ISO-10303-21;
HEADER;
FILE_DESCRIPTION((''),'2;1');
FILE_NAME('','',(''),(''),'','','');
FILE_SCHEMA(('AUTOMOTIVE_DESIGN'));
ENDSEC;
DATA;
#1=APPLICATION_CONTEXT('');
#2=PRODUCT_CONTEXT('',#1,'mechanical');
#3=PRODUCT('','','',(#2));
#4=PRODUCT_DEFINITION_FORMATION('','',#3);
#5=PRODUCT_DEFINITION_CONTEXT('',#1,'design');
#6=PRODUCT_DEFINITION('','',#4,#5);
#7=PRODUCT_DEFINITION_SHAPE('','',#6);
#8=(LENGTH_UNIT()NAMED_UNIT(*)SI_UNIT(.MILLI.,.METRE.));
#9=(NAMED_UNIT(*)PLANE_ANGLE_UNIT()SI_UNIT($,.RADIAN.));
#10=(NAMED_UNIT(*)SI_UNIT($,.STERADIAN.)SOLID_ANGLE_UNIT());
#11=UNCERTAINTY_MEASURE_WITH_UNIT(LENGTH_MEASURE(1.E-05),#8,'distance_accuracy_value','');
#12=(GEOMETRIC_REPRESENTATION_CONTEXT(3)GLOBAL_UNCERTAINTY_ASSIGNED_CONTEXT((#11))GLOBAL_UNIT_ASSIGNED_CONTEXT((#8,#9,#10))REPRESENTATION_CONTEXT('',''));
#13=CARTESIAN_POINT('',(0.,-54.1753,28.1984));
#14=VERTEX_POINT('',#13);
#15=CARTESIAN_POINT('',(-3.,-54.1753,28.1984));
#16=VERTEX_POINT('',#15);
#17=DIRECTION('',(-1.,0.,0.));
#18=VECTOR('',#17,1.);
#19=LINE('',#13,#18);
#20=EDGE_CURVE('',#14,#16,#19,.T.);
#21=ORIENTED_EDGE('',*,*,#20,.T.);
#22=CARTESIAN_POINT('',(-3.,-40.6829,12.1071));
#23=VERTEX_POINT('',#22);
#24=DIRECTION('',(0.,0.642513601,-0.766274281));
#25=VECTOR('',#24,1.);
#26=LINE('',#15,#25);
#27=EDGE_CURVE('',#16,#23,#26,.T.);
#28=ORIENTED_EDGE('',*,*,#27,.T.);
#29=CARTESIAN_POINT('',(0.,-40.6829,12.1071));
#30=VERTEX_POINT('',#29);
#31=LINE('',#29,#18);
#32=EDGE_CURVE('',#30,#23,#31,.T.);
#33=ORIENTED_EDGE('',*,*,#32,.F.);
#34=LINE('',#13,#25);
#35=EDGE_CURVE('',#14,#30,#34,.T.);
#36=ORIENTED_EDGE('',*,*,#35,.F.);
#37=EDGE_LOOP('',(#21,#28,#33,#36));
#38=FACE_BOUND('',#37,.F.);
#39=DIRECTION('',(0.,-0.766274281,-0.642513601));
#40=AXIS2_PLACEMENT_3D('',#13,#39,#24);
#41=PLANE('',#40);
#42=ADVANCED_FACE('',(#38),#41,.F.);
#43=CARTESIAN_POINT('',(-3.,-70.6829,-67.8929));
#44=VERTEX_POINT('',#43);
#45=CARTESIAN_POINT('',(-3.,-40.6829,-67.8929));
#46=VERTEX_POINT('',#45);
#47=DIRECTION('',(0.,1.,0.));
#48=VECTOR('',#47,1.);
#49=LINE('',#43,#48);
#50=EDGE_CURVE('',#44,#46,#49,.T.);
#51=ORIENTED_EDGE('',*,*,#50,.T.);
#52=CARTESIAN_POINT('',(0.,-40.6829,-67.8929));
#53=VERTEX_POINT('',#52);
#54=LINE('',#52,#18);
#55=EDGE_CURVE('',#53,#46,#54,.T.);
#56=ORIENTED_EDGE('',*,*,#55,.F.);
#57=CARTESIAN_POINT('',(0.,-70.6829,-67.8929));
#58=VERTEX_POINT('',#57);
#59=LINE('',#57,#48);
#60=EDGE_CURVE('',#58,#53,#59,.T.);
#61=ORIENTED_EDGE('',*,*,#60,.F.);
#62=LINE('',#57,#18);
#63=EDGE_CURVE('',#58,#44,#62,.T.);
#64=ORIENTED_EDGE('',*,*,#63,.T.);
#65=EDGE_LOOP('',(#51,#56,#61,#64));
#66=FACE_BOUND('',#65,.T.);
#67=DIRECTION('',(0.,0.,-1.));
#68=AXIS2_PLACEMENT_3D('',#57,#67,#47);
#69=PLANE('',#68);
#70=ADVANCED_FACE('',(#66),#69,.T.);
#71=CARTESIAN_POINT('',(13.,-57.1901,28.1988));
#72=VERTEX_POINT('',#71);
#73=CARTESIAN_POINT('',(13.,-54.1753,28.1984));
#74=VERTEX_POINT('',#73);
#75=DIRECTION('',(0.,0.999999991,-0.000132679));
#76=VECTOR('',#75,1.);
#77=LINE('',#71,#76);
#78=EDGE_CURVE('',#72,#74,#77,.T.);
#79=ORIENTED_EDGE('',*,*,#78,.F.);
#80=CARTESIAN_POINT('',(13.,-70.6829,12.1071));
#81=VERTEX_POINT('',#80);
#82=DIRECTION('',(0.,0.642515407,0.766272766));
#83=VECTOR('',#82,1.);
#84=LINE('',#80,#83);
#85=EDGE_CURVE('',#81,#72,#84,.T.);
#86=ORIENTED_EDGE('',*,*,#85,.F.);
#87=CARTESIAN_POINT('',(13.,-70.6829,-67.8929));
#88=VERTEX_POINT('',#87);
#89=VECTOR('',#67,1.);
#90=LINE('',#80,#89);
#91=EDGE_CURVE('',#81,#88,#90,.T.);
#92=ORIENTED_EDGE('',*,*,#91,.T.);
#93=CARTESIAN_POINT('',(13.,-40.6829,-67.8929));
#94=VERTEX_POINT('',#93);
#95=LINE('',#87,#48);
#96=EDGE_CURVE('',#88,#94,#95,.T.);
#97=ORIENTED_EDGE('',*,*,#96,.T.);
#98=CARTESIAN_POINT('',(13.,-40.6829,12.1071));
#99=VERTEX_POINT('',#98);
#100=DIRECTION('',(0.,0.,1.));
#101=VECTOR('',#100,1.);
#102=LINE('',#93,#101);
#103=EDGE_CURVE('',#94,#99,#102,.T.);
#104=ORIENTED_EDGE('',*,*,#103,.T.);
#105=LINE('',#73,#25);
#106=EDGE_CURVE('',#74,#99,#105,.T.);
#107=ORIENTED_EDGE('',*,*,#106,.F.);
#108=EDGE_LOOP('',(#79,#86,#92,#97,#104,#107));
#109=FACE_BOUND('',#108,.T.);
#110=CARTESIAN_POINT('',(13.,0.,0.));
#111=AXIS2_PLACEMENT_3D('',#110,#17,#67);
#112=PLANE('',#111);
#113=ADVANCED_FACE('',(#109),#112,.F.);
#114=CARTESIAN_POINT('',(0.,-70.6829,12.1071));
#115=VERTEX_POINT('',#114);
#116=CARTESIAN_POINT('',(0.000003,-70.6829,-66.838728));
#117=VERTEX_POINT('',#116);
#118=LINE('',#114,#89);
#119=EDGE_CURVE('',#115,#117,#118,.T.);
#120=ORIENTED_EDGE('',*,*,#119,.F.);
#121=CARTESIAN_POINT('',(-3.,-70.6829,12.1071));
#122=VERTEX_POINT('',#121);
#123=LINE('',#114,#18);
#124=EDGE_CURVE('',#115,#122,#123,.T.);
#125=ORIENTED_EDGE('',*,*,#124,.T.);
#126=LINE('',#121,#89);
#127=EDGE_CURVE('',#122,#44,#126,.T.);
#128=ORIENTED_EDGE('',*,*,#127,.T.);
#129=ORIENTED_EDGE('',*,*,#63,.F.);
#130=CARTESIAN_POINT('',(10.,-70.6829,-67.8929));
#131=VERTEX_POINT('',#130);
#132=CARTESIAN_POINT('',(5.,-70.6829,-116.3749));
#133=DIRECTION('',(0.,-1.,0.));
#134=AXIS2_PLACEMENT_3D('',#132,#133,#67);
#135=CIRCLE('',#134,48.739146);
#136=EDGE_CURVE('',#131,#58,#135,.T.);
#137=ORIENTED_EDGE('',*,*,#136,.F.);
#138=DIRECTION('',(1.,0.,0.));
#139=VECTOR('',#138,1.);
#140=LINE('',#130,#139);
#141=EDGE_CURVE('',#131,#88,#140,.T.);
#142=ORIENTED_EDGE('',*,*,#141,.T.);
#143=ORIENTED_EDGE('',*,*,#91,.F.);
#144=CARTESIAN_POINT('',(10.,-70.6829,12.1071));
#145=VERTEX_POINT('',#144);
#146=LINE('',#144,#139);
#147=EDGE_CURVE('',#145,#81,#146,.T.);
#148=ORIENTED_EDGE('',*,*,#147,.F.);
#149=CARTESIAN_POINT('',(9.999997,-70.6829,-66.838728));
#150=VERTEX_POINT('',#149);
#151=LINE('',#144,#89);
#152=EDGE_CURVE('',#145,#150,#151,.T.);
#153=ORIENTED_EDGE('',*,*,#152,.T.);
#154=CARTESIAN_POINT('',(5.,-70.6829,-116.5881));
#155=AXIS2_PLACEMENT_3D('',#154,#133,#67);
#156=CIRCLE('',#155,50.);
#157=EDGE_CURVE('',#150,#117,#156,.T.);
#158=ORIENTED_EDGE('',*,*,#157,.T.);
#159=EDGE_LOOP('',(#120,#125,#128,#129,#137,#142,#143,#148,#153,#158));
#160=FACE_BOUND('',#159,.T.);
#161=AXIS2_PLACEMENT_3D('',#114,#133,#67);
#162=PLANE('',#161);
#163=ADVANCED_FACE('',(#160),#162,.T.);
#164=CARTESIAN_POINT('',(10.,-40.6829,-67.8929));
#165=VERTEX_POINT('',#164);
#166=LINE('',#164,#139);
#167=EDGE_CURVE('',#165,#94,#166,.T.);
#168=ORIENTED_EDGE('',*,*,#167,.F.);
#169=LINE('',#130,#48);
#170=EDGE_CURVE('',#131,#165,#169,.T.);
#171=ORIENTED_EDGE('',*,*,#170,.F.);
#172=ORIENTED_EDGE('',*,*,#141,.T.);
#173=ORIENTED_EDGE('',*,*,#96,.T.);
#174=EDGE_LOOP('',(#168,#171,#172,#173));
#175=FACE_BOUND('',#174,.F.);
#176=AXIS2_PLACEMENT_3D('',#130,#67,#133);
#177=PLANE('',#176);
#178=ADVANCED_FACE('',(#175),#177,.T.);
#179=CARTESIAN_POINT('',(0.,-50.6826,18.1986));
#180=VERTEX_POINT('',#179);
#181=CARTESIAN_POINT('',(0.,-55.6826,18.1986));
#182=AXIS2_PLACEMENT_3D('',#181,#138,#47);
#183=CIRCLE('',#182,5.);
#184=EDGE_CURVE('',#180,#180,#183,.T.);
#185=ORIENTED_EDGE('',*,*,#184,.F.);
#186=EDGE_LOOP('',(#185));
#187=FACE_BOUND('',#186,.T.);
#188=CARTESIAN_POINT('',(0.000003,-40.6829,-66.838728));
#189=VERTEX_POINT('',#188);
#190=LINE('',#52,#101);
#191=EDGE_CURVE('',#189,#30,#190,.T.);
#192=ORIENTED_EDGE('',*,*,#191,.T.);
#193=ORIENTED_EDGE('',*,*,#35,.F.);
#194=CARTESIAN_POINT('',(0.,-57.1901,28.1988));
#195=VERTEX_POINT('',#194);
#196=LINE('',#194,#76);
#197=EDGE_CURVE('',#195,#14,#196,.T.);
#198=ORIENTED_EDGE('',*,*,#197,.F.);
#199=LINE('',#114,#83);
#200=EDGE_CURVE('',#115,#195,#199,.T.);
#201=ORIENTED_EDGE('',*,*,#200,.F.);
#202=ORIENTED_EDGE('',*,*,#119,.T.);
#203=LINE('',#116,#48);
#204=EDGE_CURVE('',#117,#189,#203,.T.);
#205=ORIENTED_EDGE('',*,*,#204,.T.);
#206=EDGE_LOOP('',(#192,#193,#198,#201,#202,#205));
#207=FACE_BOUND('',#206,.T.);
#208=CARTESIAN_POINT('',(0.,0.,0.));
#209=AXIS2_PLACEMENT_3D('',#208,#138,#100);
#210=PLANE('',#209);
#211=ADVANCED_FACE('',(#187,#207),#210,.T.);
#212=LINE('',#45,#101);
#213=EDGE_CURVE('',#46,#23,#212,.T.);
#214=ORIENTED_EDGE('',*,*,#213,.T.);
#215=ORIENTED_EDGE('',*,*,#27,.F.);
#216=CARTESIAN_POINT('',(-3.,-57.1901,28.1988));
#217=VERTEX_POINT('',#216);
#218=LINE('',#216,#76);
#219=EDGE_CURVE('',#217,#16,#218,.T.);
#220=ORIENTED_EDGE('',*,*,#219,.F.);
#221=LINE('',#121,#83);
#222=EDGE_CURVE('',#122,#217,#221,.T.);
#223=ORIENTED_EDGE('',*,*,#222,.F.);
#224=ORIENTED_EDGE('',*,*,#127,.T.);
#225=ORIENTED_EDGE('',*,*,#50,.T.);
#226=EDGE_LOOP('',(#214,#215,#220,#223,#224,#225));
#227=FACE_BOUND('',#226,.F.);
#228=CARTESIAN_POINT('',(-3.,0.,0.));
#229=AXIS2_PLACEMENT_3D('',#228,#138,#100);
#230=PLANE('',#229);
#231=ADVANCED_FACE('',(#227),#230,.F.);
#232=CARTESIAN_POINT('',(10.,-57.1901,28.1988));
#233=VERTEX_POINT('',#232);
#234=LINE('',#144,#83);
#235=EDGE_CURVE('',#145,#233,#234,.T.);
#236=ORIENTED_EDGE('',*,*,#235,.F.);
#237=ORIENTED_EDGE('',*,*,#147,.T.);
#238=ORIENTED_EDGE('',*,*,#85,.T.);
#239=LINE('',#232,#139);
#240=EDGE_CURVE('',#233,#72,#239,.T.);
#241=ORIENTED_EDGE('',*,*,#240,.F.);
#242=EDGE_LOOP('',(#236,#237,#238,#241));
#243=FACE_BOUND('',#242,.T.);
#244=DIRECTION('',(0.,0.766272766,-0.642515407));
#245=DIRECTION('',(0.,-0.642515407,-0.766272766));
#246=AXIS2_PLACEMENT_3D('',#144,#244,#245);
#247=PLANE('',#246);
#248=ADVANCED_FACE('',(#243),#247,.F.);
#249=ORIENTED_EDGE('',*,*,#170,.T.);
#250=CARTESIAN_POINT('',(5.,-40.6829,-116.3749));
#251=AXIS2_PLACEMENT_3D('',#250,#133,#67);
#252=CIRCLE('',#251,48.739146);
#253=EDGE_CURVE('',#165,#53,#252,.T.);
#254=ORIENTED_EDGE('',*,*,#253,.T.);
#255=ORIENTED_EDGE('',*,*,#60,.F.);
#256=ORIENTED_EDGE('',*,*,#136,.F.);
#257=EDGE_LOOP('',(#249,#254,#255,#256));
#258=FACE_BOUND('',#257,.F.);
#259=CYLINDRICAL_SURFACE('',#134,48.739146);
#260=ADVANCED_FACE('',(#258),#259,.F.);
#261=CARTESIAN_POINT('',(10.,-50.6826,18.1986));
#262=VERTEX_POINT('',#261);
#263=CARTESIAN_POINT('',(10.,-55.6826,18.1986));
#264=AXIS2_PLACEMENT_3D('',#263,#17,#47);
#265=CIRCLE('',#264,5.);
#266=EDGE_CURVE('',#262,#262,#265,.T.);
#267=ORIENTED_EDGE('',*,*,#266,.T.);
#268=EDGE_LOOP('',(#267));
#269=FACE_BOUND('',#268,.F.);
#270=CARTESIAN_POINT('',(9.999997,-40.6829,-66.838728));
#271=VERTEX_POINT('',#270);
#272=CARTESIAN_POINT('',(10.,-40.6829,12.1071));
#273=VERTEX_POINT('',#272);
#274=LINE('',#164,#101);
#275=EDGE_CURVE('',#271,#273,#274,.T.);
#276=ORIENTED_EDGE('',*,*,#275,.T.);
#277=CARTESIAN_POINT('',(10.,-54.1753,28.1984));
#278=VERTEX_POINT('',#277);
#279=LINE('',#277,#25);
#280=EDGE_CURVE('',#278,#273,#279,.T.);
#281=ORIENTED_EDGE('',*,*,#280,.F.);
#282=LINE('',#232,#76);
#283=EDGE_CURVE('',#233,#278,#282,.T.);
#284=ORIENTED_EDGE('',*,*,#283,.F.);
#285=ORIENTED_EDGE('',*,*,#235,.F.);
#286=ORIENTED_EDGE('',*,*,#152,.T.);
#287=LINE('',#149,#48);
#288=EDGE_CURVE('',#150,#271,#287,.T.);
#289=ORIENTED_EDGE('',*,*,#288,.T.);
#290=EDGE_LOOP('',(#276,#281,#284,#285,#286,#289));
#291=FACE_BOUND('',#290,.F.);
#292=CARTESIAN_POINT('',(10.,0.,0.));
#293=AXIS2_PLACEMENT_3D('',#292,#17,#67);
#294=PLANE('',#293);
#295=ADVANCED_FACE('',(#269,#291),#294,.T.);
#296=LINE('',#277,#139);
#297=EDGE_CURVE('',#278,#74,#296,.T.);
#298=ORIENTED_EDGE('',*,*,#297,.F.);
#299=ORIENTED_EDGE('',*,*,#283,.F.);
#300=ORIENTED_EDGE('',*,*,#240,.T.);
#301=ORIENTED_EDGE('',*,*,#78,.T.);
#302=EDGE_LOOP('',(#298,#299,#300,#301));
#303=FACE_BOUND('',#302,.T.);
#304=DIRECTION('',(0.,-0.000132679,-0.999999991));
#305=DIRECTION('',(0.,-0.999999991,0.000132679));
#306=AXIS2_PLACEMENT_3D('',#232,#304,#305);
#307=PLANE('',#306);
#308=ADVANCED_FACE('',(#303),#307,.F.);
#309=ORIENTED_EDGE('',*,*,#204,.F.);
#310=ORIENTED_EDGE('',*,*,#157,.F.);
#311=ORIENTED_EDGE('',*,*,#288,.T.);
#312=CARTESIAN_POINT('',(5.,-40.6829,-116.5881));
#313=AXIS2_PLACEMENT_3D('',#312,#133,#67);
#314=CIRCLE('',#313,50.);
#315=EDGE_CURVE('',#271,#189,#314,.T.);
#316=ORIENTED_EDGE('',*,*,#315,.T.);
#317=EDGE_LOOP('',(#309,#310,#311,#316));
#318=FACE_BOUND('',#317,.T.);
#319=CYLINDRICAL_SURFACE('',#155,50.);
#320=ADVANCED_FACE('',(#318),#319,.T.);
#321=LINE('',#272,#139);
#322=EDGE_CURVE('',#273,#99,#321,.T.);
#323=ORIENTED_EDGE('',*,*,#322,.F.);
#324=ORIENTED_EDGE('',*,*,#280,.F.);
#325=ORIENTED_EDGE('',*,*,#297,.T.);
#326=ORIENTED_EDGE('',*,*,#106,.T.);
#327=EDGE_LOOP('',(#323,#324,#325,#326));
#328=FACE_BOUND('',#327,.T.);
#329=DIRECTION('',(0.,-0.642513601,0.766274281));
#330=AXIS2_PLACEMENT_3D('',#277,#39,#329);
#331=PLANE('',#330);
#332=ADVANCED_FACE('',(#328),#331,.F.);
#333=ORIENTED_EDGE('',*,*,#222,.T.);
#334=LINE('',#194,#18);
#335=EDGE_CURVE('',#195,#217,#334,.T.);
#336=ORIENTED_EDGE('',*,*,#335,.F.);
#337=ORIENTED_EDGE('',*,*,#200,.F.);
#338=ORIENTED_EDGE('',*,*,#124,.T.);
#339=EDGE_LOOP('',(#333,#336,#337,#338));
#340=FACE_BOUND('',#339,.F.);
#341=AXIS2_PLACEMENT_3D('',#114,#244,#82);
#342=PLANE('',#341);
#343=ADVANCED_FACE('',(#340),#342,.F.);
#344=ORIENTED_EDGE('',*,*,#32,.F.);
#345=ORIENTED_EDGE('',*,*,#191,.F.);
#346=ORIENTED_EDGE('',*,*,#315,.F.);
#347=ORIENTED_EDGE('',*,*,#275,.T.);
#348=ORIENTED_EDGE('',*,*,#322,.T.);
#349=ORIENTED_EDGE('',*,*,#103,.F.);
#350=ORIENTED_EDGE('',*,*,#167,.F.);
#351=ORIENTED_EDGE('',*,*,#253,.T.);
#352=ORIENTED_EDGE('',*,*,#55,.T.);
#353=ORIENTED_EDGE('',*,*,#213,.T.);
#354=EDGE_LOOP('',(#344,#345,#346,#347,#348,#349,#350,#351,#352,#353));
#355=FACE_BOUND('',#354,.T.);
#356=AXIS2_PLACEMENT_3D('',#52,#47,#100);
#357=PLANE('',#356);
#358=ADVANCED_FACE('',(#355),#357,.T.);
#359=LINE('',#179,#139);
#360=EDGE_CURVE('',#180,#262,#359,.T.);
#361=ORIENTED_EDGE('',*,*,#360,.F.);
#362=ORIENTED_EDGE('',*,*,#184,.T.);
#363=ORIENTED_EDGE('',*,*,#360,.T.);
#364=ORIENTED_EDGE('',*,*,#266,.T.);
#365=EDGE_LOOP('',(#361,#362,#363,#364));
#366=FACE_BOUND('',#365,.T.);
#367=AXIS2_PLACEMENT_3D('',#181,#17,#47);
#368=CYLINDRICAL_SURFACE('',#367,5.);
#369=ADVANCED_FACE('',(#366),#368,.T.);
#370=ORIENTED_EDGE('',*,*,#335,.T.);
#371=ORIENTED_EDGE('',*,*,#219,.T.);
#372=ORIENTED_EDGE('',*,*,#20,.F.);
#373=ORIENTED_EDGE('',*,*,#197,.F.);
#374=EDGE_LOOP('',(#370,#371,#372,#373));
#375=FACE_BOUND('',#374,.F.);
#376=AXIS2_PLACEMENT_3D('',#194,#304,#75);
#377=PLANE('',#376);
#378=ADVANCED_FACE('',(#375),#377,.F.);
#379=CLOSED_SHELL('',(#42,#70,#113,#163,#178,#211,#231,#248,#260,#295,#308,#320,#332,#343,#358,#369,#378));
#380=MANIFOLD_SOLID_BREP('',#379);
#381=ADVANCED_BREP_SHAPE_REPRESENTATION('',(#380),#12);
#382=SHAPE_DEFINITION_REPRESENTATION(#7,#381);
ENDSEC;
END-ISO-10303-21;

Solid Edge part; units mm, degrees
sketch "Sketch1" plane through (0, 0, 0) normal (1, 0, 0) x (0, 1, 0)
  line L0 (-70.6829, -67.8929) -> (-40.6829, -67.8929)
  line L1 (-40.6829, -67.8929) -> (-40.6829, 12.1071)
  line L2 (-40.6829, 12.1071) -> (-70.6829, 12.1071)
  line L3 (-70.6829, 12.1071) -> (-70.6829, -67.8929)
  line L4 (-70.6829, 12.1071) -> (-40.6829, 12.1071)
  line L5 (-54.1753, 28.1984) -> (-40.6829, 12.1071)
  line L6 (-57.1901, 28.1988) -> (-54.1753, 28.1984)
  line L7 (-70.6829, 12.1071) -> (-57.1901, 28.1988)
  dimension "D1" = 30
  dimension "D2" = 20.9994
  dimension "D3" = 21
  dimension "D4" = 80
  dimension "D5" = 30
extrude "Protrusion1" add sketch "Sketch1" against normal blind 3
sketch "Sketch2" plane through (0, -21.8205, 20.1807) normal (1, 0, 0) x (0, 1, 0)
  circle A0 centre (-33.8621, -1.9821) radius 5
  dimension "D1" = 10
extrude "ExtrudedProtrusion_2" add sketch "Sketch2" along normal blind 11
mirror "Mirror1" about plane through (5, -21.8205, 20.1506) normal (1, 0, 0) of "Protrusion1"
sketch "Sketch3" plane through (11.5, -70.6829, -27.8929) normal (0, -1, 0) x (0, 0, -1)
  arc A0 (40, -1.5) -> (40, -11.5) centre (88.482, -6.5) ccw
  line L0 (38.9458, -1.5) -> (40, -1.5)
  arc A1 (38.9458, -1.5) -> (38.9458, -11.5) centre (88.6952, -6.5) ccw
  line L1 (40, -11.5) -> (38.9458, -11.5)
extrude "ExtrudedProtrusion_4" add sketch "Sketch3" against normal blind 30
